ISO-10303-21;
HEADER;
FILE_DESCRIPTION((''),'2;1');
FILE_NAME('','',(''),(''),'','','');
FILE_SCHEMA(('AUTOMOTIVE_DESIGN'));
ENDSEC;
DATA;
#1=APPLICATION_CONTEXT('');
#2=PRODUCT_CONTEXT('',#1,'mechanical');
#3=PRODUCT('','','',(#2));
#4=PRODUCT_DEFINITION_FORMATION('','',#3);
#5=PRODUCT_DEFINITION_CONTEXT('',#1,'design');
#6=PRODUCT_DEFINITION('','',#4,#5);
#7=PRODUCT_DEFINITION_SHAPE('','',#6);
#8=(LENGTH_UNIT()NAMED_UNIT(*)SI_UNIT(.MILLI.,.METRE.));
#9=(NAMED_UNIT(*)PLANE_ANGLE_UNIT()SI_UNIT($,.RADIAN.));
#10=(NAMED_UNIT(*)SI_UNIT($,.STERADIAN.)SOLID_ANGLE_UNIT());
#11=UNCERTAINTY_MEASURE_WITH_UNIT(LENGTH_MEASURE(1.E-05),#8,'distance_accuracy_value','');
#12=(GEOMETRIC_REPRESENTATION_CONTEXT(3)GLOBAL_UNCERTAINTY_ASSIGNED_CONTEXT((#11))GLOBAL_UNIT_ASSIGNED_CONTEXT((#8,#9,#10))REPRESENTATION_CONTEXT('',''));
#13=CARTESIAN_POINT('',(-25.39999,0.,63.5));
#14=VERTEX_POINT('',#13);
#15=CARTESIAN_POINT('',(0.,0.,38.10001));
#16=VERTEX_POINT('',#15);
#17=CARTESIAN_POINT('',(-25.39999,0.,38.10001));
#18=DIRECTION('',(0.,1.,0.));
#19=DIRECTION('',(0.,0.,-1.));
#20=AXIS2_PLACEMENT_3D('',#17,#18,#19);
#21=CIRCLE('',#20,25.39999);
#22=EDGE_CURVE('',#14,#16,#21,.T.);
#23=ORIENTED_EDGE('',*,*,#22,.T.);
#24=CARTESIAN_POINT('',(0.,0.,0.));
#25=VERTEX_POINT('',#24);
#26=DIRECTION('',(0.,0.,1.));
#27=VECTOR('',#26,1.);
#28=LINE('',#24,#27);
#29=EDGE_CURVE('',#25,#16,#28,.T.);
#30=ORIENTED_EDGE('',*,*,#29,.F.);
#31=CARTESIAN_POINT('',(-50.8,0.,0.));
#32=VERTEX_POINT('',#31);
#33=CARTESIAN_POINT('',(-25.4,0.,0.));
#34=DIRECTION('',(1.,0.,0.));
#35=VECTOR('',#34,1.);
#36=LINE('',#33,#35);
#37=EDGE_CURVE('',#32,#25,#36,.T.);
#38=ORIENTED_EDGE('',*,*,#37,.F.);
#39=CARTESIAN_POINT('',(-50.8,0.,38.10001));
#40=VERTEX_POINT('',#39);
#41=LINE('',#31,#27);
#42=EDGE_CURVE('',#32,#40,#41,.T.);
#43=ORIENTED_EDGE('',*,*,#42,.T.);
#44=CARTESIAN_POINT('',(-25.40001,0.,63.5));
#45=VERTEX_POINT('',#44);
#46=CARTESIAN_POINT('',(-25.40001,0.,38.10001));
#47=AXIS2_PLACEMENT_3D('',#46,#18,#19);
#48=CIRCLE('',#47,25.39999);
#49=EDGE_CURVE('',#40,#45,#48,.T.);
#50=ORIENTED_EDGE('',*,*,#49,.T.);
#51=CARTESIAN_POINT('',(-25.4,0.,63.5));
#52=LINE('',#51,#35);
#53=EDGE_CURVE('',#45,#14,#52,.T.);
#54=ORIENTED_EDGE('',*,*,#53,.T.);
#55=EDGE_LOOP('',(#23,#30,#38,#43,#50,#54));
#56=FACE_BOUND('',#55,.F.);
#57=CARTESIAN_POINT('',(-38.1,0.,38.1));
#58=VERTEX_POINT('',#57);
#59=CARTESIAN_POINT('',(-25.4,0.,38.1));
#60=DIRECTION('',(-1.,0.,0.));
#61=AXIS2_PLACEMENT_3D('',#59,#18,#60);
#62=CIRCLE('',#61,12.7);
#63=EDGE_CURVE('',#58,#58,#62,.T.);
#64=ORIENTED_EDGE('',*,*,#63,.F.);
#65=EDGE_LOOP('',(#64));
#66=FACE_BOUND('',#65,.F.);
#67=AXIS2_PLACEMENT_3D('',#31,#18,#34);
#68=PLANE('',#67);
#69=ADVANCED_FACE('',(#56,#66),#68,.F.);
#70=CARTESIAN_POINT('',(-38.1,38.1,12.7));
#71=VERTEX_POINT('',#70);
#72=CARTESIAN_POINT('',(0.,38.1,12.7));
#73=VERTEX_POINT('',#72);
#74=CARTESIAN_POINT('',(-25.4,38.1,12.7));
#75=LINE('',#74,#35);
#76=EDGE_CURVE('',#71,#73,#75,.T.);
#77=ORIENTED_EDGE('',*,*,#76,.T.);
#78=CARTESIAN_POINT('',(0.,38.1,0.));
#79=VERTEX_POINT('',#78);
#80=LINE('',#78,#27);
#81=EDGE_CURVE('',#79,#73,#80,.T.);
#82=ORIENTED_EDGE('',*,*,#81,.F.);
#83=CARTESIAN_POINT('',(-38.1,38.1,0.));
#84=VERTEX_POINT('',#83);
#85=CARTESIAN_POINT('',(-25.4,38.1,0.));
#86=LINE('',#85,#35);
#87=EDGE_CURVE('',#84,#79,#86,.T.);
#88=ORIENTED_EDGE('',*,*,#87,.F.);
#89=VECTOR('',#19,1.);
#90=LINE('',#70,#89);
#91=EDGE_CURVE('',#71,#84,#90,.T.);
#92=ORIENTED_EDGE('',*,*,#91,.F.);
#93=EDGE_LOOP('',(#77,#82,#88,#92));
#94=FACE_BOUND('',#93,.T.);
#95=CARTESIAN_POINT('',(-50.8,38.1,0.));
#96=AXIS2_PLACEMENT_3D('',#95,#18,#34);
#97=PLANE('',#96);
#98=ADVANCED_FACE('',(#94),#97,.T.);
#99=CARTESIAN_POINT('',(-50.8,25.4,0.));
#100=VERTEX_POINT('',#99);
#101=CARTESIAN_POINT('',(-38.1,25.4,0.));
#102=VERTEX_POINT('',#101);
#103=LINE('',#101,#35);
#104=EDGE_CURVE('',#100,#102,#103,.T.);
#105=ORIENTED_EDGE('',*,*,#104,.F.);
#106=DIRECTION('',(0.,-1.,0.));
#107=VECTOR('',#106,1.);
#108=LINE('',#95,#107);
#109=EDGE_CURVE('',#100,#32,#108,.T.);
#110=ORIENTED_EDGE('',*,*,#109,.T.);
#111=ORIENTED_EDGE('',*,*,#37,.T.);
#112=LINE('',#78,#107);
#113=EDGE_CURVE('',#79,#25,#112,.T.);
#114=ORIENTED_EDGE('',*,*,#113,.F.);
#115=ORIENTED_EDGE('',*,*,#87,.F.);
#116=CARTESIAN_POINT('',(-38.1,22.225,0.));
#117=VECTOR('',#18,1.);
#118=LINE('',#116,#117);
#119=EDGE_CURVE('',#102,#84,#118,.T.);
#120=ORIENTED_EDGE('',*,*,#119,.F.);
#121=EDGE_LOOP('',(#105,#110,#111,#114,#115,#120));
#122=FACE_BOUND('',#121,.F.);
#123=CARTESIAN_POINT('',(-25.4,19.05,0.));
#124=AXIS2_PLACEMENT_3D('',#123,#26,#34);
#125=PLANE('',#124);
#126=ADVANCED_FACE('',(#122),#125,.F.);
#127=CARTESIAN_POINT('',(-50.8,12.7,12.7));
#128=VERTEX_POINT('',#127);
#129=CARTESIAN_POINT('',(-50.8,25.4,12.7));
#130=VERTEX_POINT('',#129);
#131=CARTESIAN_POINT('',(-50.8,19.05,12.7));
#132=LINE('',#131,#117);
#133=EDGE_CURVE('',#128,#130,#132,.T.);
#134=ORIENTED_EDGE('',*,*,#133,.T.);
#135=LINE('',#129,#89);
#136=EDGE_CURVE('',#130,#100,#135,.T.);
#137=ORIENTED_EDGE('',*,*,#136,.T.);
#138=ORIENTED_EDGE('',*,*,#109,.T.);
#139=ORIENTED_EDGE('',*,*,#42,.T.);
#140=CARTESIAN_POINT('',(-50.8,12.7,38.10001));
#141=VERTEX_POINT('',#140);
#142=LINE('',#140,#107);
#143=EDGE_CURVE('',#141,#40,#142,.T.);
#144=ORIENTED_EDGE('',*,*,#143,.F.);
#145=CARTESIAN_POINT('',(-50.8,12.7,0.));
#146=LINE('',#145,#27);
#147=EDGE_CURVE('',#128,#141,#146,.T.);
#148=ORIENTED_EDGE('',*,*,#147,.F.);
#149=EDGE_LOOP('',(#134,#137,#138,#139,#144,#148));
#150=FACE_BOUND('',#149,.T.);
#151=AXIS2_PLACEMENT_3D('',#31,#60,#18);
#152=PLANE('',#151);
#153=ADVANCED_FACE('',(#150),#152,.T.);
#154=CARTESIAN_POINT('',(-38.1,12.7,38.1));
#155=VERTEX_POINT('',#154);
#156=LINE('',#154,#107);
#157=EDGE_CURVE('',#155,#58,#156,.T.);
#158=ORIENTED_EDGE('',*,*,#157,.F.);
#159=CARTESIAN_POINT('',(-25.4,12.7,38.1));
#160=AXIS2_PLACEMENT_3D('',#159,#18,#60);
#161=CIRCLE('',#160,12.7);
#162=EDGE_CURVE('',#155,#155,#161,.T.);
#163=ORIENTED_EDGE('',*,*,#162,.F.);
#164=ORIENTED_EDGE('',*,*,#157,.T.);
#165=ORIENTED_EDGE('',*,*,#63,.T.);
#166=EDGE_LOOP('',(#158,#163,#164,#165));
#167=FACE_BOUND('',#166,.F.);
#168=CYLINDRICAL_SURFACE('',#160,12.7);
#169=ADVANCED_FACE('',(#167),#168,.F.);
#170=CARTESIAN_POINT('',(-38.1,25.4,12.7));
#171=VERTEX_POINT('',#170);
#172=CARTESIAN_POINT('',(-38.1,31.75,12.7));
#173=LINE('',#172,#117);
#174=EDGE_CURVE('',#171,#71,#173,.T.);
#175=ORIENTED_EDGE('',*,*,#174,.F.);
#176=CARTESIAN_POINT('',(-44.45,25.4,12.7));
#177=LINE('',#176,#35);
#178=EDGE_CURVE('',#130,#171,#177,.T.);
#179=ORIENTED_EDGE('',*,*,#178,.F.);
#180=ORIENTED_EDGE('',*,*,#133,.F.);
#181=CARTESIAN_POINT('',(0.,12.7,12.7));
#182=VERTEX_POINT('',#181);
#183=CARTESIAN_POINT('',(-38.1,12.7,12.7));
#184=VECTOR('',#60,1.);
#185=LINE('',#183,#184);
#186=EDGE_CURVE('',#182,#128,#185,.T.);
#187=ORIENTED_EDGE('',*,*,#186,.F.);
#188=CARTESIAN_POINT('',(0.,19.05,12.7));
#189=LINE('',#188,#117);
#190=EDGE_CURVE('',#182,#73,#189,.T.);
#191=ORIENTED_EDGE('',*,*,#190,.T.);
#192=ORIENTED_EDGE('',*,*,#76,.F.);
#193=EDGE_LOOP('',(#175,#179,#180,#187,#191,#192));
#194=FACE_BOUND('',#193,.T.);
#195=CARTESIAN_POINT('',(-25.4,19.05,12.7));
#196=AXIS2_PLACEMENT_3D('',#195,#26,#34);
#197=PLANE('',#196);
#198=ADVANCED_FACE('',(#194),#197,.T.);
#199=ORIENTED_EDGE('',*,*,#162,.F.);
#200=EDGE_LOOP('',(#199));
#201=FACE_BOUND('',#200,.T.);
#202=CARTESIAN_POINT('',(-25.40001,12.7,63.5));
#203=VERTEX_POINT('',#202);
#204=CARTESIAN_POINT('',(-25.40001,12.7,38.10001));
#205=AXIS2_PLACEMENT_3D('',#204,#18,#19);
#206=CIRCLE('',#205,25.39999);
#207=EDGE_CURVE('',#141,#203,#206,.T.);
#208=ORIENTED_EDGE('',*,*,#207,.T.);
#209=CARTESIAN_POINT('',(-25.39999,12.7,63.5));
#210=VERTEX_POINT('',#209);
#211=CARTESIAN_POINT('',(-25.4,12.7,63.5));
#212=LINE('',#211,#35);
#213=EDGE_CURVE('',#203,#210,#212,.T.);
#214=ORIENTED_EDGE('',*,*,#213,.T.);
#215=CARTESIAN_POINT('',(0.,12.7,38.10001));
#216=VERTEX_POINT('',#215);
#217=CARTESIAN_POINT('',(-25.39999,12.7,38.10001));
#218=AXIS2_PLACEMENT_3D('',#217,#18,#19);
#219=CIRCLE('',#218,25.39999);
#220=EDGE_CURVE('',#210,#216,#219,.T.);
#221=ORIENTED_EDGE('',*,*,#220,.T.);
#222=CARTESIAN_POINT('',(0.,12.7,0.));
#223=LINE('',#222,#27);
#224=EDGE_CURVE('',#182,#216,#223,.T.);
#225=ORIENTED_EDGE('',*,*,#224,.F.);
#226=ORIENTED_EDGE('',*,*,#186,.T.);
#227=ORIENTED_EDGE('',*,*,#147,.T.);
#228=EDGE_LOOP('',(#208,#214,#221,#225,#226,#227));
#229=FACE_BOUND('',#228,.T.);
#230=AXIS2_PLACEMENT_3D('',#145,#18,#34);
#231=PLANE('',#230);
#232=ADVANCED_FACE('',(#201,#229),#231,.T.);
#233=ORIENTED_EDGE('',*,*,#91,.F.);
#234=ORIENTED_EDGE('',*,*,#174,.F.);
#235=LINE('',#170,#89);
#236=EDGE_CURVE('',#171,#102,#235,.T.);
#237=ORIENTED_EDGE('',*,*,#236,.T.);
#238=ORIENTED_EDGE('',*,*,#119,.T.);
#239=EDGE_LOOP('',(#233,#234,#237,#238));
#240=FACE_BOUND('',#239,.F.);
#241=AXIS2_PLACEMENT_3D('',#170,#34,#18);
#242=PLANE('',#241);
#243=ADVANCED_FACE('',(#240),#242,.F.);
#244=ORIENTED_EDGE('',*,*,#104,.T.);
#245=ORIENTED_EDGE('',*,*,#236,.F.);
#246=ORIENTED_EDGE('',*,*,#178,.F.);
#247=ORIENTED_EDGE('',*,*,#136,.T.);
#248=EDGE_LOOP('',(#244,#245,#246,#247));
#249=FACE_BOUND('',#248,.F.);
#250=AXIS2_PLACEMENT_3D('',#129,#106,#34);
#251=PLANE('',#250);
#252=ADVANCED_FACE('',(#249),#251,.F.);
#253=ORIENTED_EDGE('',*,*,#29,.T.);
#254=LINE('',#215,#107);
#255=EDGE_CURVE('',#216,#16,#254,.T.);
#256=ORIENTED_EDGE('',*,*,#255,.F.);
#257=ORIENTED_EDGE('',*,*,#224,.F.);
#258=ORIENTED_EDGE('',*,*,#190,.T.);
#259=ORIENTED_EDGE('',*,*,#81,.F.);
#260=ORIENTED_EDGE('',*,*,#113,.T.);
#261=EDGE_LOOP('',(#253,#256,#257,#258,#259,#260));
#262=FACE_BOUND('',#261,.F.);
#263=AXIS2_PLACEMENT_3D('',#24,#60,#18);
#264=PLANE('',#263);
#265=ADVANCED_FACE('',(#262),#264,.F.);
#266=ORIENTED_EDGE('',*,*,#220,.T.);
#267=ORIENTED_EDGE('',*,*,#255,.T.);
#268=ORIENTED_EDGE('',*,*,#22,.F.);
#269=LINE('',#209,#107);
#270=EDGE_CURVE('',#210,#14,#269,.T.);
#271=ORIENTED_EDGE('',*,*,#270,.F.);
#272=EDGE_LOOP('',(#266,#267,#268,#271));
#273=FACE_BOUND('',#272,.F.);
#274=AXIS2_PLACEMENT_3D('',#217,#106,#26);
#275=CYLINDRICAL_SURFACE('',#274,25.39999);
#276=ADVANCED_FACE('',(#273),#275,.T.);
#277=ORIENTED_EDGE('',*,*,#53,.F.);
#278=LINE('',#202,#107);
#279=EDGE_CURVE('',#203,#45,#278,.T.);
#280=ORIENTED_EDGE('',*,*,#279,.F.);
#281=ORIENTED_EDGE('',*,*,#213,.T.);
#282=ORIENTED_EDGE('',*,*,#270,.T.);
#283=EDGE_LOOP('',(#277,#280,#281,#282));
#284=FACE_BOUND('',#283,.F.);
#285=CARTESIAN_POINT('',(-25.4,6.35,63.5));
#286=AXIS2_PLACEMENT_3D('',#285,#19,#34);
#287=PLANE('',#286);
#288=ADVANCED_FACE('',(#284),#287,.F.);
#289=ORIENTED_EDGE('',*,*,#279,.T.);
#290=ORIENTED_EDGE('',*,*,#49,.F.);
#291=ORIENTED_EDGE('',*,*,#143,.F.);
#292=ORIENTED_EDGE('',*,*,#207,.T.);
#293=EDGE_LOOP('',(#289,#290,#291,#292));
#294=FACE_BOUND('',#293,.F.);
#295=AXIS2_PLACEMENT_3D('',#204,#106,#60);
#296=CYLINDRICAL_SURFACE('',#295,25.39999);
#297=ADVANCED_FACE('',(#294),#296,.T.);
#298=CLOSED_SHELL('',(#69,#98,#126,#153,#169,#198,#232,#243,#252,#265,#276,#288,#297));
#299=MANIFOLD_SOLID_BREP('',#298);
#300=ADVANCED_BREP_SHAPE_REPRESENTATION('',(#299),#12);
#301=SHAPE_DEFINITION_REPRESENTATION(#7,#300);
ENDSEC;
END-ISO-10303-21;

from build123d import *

# Parameters (mm, degrees)
F0_W     = 50.8
F0_H     = 38.1
F1_DEPTH = 12.7
F2_W     = 50.8
F2_H     = 12.7
F3_DEPTH = 63.5
F4_W     = 12.7
F4_H     = 12.7
F5_DEPTH = 12.701
F6_R     = 12.7
F7_DEPTH = 12.701
F8_R     = 25.39999


# Not quite as in the source:
# - a fillet or chamfer is up to 0.001 mm smaller than in the source, because OpenCascade refuses the exact size


with BuildPart() as f1:
    # F0 (on Top) → F1 (new body)
    with BuildSketch(Plane.XY):
        with Locations((-25.4, 19.05)):
            Rectangle(F0_W, F0_H)
    extrude(amount=F1_DEPTH)

    # F2 (on face) → F3 (join)
    with BuildSketch(Plane(origin=(0, 0, 0), x_dir=(1, 0, 0), z_dir=(0, 0, -1))):
        with Locations((-25.4, -6.35)):
            Rectangle(F2_W, F2_H)
    extrude(amount=-F3_DEPTH)

    # F4 (on face) → F5 (cut, through all)
    with BuildSketch(Plane.XY.offset(12.7)):
        with Locations((-44.45, 31.75)):
            Rectangle(F4_W, F4_H)
    extrude(amount=-F5_DEPTH, mode=Mode.SUBTRACT)

    # F6 (on face) → F7 (cut, through all)
    with BuildSketch(Plane(origin=(0, 12.7, 0), x_dir=(-1, 0, 0), z_dir=(0, 1, 0))):
        with Locations((25.4, 38.1)):
            Circle(F6_R)
    extrude(amount=-F7_DEPTH, mode=Mode.SUBTRACT)

    # F8 (radius 25.4 in the source; OpenCascade refuses exactly that, so slightly less here)
    f8_edges = [f1.edges().sort_by_distance(p)[0] for p in [
        (-50.8, 6.35, 63.5),
        (0, 6.35, 63.5),
    ]]
    fillet(f8_edges, radius=F8_R)


solid = f1.part
